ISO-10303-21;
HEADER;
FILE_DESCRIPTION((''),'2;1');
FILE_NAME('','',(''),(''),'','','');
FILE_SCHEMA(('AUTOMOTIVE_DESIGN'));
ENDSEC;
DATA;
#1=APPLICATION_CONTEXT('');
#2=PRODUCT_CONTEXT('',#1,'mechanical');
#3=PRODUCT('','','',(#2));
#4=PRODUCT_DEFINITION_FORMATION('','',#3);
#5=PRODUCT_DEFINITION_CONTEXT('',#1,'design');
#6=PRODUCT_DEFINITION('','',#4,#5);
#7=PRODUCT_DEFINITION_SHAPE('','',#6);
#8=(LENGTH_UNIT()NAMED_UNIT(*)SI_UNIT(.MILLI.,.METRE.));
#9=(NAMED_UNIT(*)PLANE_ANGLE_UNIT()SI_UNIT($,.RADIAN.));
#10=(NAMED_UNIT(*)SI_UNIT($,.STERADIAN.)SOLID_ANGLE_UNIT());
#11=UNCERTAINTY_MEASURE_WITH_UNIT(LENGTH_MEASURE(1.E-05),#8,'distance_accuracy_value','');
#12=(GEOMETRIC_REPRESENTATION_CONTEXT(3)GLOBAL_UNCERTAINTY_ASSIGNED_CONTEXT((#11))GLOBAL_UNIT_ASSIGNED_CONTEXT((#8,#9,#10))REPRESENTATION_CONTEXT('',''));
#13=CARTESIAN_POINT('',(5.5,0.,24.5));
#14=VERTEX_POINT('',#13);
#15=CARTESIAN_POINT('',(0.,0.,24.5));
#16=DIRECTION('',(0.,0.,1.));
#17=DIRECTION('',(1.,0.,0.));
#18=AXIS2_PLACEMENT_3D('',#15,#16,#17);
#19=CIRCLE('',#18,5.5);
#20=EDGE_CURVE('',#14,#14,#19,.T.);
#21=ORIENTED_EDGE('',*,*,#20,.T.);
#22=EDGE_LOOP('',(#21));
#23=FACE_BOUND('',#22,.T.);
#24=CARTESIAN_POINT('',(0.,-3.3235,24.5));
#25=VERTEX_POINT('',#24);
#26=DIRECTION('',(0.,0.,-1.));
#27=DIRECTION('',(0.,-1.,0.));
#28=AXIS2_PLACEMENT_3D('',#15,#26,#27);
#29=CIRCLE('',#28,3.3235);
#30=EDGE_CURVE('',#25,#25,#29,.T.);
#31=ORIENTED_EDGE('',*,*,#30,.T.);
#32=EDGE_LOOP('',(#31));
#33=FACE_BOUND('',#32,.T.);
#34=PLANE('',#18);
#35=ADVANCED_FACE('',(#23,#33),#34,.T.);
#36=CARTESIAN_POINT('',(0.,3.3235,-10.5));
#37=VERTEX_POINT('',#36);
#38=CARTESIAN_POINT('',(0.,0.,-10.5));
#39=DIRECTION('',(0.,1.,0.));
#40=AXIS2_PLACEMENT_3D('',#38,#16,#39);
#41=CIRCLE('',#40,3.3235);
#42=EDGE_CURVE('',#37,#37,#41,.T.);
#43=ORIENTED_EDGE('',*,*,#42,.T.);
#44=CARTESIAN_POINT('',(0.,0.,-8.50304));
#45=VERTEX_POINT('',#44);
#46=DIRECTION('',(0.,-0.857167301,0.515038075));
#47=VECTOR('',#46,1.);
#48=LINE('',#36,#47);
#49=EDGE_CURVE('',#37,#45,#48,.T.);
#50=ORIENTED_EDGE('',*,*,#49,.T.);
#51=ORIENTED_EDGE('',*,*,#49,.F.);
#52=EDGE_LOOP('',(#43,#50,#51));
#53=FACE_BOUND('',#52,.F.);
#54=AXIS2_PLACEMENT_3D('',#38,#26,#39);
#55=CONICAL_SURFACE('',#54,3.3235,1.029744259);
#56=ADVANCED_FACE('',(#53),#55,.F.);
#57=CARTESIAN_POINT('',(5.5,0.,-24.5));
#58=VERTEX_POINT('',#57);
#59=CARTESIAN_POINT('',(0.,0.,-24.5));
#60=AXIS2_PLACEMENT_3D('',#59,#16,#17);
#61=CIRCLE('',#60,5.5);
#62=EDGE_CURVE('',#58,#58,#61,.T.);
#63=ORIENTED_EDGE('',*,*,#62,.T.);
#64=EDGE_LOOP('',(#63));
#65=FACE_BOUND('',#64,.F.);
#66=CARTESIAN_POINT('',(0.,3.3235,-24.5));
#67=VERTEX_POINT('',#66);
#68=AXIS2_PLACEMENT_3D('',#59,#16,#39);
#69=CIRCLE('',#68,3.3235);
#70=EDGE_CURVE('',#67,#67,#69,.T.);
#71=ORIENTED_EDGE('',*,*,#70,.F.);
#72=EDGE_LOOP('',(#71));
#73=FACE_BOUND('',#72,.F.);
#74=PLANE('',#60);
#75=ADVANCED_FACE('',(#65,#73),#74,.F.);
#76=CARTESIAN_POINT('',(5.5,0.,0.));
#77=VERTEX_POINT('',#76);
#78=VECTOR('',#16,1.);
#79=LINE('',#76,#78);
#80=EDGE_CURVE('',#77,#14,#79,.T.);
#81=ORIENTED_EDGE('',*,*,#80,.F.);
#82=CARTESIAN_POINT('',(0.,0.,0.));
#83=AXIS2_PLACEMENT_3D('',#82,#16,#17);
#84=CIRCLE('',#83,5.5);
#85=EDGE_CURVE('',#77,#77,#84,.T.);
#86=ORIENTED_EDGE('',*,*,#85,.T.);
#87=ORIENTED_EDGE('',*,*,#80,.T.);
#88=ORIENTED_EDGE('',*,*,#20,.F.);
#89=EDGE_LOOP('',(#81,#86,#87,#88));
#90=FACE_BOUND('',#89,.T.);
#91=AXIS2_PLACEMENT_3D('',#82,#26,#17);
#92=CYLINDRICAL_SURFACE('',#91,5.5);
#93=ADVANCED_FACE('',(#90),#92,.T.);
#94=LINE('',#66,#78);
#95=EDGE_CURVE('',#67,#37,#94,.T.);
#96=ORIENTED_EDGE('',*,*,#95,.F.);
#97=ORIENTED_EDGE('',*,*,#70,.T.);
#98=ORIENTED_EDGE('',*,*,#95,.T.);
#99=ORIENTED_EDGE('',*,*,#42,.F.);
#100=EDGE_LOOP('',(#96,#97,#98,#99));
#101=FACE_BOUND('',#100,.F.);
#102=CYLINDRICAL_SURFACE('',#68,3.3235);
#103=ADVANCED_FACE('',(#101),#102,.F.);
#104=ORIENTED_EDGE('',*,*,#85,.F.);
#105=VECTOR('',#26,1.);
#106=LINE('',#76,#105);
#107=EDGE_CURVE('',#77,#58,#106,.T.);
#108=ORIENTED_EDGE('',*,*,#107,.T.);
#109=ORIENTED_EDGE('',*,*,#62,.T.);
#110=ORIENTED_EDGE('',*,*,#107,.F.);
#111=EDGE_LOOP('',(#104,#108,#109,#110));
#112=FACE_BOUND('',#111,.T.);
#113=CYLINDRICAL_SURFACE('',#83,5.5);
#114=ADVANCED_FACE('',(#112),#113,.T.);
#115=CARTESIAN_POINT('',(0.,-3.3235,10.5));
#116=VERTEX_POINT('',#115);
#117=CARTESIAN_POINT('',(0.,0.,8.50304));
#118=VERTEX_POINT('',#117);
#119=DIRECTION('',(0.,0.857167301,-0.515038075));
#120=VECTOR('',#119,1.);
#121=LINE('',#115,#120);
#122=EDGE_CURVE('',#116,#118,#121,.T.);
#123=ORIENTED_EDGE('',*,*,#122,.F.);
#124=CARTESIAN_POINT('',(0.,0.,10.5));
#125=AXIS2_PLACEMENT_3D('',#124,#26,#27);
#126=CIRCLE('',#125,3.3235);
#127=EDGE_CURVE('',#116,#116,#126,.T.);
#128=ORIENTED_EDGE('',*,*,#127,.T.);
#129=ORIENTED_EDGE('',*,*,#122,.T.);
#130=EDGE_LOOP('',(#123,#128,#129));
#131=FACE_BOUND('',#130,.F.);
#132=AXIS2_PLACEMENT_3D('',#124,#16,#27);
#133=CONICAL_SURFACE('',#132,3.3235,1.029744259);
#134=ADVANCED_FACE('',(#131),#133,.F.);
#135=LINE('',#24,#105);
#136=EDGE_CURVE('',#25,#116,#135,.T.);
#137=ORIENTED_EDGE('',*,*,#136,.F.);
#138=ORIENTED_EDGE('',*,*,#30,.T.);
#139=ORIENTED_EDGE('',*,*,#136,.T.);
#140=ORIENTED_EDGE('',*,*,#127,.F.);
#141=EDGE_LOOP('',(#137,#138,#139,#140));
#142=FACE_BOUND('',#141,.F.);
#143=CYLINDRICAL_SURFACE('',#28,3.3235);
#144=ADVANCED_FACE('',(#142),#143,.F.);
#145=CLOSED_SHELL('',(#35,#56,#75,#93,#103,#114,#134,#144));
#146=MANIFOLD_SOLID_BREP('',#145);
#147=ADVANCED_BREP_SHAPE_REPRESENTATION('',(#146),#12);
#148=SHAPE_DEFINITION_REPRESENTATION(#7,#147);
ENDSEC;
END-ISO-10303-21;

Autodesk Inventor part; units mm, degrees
ref_plane "YZ Plane" through (0, 0, 0) normal (1, 0, 0) x (0, 1, 0)
ref_plane "XZ Plane" through (0, 0, 0) normal (0, 1, 0) x (-1, 0, 0)
ref_plane "XY Plane" through (0, 0, 0) normal (0, 0, 1) x (1, 0, 0)
sketch "Skizze1" plane through (0, 0, 0) normal (0, 0, 1) x (1, 0, 0)
  circle A0 centre (0, 0) radius 5.5
  dimension "d0" = 11
extrude "Extrusion1" add sketch "Skizze1" along normal mid plane 49
sketch "Skizze2" plane through (0, 0, 24.5) normal (0, 0, 1) x (1, 0, 0)
  circle A0 centre (0, 0) radius 5.5 construction
hole "Bohrung1" at (0, 0, 24.5) direction (0, 0, -1) diameter 6.647 depth 14 tip angle 118 thread size "M8x1.25" class "6H" standard "ISO Metric profile"
sketch "Skizze3" plane through (0, 0, -24.5) normal (0, 0, -1) x (-1, 0, 0)
  circle A0 centre (0, 0) radius 5.5 construction
hole "Bohrung2" at (0, 0, -24.5) direction (0, 0, 1) diameter 6.647 depth 14 tip angle 118 thread size "M8x1.25" class "6H" standard "ISO Metric profile"
properties part number "RadBolzen"
